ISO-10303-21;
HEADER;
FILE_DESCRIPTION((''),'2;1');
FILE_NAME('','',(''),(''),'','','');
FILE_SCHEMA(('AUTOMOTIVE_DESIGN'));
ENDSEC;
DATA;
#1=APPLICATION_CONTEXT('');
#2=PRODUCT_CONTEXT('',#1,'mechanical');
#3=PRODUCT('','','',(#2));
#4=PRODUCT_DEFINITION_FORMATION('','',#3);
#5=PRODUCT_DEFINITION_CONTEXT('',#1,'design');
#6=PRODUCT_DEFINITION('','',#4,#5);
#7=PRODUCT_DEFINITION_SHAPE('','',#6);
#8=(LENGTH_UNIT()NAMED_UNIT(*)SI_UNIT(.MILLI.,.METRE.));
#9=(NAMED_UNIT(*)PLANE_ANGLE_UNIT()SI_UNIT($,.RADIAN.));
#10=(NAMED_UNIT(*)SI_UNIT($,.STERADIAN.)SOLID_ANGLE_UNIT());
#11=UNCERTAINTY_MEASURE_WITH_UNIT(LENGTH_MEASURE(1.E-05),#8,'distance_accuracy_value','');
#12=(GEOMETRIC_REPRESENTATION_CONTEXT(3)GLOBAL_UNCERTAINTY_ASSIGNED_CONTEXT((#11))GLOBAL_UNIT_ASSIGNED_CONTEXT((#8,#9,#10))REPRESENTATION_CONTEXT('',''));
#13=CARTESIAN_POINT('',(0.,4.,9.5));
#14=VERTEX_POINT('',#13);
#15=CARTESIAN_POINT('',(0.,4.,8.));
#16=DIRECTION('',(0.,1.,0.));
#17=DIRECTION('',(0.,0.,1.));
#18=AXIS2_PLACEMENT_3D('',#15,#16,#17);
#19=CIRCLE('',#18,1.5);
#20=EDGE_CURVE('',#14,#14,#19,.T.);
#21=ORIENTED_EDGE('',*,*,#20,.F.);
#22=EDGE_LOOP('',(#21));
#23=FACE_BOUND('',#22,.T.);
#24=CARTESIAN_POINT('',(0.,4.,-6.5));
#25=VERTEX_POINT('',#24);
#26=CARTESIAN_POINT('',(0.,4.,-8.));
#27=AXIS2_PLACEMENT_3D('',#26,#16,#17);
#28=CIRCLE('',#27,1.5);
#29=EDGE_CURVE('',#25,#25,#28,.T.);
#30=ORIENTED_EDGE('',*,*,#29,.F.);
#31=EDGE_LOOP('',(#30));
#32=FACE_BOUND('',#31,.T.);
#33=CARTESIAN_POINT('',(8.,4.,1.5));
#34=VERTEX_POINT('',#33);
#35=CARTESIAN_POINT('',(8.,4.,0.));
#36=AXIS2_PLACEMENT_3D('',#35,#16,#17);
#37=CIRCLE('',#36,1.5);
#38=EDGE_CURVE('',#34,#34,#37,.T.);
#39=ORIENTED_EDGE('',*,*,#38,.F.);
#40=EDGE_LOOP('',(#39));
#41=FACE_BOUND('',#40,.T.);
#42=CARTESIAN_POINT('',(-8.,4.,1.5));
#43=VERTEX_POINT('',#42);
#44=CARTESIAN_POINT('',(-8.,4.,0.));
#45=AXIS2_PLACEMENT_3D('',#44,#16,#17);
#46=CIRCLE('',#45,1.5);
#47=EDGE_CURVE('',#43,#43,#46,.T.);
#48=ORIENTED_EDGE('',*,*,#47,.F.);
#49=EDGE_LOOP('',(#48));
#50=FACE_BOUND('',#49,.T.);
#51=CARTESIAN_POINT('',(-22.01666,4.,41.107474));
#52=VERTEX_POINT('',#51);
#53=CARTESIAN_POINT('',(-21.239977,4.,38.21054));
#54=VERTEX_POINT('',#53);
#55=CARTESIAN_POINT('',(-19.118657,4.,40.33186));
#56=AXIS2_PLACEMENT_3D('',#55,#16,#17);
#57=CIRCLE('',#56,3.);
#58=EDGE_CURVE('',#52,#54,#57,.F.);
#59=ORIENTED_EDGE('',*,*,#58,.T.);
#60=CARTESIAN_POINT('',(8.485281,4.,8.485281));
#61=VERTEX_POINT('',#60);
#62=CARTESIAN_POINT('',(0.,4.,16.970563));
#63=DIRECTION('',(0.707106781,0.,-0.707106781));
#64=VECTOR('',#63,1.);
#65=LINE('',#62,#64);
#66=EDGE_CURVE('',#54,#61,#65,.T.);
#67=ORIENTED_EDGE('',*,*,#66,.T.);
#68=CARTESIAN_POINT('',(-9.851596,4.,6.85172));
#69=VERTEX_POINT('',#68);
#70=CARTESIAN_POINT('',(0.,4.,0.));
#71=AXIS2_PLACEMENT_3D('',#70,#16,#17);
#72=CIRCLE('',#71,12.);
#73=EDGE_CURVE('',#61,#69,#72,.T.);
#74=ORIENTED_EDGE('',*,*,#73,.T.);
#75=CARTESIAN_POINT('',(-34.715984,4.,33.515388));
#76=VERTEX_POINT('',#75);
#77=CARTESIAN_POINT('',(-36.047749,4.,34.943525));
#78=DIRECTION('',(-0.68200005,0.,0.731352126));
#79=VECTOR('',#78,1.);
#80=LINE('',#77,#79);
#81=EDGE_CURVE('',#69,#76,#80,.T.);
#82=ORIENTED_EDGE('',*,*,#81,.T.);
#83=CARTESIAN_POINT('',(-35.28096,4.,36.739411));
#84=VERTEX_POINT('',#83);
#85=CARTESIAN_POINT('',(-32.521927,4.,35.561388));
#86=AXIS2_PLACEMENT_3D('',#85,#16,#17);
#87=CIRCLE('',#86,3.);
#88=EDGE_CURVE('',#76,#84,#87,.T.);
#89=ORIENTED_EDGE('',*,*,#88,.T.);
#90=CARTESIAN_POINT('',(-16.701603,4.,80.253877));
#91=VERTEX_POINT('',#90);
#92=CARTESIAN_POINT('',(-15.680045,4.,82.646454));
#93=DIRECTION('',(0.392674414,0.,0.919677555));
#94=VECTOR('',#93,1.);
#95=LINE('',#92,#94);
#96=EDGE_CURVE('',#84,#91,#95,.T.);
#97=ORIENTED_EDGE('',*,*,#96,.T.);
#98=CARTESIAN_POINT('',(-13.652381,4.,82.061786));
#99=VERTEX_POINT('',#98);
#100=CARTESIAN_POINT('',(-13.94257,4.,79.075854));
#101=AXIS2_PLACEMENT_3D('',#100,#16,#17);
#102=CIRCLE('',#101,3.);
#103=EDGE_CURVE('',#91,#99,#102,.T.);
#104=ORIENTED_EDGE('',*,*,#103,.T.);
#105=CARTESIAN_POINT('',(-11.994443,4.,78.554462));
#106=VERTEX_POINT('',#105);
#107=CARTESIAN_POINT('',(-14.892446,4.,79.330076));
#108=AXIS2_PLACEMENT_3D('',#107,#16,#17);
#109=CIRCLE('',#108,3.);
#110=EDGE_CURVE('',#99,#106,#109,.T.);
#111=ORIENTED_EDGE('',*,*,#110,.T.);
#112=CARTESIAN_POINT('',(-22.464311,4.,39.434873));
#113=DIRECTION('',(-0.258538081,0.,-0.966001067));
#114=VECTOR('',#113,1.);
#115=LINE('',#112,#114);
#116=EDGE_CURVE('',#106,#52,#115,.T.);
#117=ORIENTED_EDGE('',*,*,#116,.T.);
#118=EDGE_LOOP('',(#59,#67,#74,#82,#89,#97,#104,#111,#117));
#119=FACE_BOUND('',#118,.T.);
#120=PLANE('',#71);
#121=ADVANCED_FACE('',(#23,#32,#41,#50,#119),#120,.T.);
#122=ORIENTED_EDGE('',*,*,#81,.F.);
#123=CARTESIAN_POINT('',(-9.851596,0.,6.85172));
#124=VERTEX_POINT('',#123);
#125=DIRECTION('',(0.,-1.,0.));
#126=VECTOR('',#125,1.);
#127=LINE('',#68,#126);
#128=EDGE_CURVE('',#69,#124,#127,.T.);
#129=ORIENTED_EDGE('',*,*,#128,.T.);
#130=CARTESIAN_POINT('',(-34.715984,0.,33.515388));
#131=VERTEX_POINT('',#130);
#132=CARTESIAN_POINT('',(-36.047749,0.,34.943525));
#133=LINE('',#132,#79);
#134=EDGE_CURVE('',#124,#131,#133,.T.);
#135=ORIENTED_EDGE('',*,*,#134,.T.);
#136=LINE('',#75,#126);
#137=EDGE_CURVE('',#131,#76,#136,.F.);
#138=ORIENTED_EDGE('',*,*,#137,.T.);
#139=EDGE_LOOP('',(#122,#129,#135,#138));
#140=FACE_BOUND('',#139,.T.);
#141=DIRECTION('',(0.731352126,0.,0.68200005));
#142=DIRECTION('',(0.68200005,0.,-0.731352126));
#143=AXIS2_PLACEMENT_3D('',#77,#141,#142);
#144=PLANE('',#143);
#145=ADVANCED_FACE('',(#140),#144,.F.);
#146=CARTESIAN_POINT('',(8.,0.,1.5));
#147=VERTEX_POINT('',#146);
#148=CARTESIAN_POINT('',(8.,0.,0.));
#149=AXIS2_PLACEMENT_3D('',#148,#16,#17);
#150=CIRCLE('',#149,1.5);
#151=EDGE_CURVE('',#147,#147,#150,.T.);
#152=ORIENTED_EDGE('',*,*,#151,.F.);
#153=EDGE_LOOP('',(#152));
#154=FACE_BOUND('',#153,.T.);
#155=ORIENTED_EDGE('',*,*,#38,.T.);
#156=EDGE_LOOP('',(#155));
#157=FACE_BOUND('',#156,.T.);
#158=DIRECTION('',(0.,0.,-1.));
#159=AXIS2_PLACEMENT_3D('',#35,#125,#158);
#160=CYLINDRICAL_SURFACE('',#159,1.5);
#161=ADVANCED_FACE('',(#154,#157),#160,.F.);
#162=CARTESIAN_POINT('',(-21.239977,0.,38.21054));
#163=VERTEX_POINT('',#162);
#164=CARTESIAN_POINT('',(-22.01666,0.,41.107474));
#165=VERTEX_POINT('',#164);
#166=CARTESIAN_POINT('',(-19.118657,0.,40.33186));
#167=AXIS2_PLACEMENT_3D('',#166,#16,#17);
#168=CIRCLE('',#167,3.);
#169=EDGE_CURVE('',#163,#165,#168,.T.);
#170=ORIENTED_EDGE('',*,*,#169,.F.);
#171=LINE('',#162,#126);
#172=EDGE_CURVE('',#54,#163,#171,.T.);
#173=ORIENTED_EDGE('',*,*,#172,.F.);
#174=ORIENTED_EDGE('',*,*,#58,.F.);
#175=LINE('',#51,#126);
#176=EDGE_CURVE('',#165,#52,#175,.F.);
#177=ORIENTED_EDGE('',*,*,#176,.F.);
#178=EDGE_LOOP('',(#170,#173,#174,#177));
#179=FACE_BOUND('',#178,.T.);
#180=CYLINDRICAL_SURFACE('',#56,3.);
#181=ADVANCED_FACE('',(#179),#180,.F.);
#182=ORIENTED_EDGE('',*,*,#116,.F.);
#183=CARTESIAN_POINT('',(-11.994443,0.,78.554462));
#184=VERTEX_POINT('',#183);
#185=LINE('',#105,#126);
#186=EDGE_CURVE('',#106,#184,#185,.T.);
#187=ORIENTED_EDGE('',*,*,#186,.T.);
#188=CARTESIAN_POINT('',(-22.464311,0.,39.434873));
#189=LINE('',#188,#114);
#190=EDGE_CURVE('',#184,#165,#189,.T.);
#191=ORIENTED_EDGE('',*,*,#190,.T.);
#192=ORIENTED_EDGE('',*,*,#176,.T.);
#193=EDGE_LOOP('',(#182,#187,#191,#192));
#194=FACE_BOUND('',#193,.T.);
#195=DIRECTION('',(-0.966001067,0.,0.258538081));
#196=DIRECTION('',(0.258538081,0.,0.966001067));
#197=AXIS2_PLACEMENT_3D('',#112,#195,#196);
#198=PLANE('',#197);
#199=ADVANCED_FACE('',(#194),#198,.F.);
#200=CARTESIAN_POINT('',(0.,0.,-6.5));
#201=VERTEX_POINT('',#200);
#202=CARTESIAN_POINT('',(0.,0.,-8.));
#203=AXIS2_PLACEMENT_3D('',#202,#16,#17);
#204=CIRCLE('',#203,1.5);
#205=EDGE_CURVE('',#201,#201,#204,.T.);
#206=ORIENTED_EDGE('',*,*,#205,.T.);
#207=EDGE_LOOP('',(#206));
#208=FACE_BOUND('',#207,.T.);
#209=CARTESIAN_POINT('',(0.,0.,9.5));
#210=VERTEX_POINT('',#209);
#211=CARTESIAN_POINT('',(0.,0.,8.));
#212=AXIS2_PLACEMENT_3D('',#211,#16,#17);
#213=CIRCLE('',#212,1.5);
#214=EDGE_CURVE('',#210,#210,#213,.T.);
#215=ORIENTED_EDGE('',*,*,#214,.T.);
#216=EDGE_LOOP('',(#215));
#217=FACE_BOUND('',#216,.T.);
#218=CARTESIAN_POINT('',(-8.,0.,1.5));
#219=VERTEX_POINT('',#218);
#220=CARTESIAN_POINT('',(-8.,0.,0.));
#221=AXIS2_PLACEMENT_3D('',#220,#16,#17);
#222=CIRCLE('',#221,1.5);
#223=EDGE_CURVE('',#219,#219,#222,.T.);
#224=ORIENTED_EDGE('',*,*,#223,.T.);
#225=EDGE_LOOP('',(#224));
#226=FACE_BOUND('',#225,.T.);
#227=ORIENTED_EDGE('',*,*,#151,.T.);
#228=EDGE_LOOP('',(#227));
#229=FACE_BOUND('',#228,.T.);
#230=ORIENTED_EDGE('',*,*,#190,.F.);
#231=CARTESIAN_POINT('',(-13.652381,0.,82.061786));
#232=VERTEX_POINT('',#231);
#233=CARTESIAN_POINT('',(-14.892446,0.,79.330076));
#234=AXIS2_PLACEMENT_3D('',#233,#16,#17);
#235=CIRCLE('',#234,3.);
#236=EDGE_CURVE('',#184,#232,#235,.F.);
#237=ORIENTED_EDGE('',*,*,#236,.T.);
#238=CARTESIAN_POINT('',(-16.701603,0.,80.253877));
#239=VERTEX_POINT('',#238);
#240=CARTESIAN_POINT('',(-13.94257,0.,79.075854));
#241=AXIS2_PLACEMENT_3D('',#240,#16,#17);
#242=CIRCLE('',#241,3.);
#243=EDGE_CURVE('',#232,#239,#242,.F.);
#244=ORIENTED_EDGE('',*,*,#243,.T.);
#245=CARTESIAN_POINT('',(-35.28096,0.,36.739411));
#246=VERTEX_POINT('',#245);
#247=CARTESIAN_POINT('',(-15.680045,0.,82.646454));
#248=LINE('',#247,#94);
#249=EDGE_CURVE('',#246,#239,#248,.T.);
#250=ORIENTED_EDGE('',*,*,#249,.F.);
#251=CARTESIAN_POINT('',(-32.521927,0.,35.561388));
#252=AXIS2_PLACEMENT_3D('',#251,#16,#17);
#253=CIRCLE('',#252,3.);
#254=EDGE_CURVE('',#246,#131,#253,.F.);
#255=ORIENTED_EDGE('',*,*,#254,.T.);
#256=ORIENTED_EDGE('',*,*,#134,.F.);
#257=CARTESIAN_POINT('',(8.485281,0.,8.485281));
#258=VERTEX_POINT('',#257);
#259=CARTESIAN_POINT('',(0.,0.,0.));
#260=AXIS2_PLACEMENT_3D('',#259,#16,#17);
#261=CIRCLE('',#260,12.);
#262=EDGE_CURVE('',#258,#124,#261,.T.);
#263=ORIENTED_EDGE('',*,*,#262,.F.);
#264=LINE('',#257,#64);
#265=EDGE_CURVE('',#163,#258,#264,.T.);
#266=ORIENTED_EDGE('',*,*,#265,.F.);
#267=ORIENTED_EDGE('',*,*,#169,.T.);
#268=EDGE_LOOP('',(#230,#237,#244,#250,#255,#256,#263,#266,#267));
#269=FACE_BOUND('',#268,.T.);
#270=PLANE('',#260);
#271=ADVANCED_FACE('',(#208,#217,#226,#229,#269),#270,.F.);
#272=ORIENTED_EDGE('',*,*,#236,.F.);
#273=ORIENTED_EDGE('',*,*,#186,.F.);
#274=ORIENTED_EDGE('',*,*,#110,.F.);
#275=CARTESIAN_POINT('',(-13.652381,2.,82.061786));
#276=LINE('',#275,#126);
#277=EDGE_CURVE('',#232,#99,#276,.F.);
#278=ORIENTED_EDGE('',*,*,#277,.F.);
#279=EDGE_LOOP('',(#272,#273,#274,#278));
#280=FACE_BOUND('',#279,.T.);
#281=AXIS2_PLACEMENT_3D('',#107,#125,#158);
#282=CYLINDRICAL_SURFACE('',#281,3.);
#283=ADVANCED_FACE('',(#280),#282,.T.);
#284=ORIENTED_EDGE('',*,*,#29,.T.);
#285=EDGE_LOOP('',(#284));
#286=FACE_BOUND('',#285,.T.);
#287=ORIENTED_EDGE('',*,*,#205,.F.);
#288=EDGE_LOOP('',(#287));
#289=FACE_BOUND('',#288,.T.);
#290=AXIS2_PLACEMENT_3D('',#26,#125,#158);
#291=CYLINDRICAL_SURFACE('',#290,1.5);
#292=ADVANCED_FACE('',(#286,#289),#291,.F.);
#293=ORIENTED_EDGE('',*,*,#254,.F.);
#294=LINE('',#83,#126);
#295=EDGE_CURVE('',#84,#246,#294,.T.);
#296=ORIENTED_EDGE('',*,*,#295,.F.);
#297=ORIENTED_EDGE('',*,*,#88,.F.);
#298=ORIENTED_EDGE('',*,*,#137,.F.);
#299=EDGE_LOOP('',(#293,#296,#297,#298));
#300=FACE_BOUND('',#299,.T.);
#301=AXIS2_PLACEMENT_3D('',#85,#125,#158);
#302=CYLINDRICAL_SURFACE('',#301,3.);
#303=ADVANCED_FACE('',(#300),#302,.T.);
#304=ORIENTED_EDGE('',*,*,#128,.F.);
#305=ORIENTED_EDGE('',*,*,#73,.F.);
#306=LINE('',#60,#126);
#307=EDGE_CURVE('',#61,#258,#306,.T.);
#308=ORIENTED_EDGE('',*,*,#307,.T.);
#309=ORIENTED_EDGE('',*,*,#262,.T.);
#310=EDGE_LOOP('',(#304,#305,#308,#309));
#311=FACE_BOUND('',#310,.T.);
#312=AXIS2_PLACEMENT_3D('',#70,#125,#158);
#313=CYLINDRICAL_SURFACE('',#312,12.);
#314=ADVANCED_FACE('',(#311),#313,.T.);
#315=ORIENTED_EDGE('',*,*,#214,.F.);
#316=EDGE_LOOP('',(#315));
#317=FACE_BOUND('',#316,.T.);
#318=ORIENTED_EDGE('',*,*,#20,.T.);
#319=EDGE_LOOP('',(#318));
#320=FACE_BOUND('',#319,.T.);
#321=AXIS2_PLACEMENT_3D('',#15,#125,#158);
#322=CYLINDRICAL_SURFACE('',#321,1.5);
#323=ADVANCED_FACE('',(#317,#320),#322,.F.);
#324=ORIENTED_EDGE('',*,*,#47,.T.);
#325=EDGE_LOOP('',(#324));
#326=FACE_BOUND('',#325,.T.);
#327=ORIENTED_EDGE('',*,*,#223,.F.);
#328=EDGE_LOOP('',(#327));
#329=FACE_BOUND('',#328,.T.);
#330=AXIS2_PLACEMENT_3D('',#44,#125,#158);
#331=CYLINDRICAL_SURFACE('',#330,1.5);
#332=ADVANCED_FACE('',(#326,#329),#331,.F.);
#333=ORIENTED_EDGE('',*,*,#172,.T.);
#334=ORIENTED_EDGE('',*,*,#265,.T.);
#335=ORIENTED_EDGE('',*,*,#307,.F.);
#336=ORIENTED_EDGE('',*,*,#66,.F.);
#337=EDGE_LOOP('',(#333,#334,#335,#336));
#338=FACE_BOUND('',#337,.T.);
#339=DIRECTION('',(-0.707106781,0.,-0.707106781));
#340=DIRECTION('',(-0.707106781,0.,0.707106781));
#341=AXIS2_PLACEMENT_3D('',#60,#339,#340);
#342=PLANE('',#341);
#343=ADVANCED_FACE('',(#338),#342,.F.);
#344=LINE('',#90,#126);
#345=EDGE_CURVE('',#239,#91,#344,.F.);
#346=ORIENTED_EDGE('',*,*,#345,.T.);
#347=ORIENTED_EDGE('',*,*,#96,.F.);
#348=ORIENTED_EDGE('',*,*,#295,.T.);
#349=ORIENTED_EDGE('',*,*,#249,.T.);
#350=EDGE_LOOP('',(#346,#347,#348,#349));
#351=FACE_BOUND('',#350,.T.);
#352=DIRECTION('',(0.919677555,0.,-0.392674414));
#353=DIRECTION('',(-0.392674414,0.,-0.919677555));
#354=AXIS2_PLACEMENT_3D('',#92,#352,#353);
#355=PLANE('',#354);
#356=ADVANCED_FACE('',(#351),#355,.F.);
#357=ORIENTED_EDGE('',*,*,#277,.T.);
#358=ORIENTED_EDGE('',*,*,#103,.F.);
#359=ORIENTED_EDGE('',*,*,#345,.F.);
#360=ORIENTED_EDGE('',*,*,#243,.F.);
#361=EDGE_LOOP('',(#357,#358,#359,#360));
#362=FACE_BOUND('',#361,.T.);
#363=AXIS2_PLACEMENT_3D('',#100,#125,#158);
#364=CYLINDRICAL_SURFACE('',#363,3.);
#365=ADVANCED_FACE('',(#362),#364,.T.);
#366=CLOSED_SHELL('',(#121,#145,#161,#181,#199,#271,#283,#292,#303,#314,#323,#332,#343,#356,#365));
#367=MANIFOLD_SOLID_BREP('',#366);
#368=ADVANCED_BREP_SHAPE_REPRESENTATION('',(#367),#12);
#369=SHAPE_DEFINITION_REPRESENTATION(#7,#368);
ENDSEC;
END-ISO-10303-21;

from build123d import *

# Parameters (mm, degrees)
ESQUISSE1_R        = 1.5
BOSS_EXTRU_1_DEPTH = 4
CONG_1_R           = 3


with BuildPart() as part:
    # Esquisse1 → Boss.-Extru.1 (new body)
    with BuildSketch(Plane(origin=(0, 0, 0), x_dir=(1, 0, 0), z_dir=(0, 1, 0))):
        with BuildLine():
            Line((8.485281374, -8.485281374), (0, -16.970562748))
            Line((0, -16.970562748), (-22.464310668, -39.434873416))
            Line((-22.464310668, -39.434873416), (-11.218828677, -81.452465455))
            Line((-11.218828677, -81.452465455), (-15.680045384, -82.646454204))
            Line((-15.680045384, -82.646454204), (-36.047749068, -34.943524646))
            Line((-36.047749068, -34.943524646), (-9.851595733, -6.851719603))
            ThreePointArc((-9.851595733, -6.851719603), (1.064816767, 11.952663521), (8.485281374, -8.485281374))
        make_face()
        with Locations(Location((0, 8, 0), (0, 0, 270))):
            Circle(ESQUISSE1_R, mode=Mode.SUBTRACT)
        with Locations(Location((8, 0, 0), (0, 0, 270))):
            Circle(ESQUISSE1_R, mode=Mode.SUBTRACT)
        with Locations(Location((0, -8, 0), (0, 0, 270))):
            Circle(ESQUISSE1_R, mode=Mode.SUBTRACT)
        with Locations(Location((-8, 0, 0), (0, 0, 270))):
            Circle(ESQUISSE1_R, mode=Mode.SUBTRACT)
    extrude(amount=BOSS_EXTRU_1_DEPTH)

    # Congé1
    # the kernel refuses this fillet: 3 mm, written as the material it adds along each edge
    with BuildSketch(Plane(origin=(-22.464310668, 0, 39.434873416), x_dir=(0.7071067811865301, 0, -0.707106781186565), z_dir=(0, 1, 0))) as cong_1_piece_1:
        with BuildLine():
            CenterArc((CONG_1_R * 0.57715637581, -CONG_1_R), CONG_1_R, 90, 59.983334692)
            Line((-CONG_1_R * 0.288723559099, -CONG_1_R * 0.499748125118), (0, 0))
            Line((0, 0), (CONG_1_R * 0.57715637581, 0))
        make_face()
    extrude(amount=4)
    # the kernel refuses this fillet: 3 mm, written as the material it takes off along each edge
    with BuildSketch(Plane(origin=(-36.047749068, -4.881837421, 34.943524646), x_dir=(0.3926744141534844, 0, 0.9196775546185836), z_dir=(0, 1, 0))) as cong_1_2_piece_1:
        with BuildLine():
            CenterArc((CONG_1_R * 0.650911656199, CONG_1_R), CONG_1_R, 203.878855686, 66.121144314)
            Line((-CONG_1_R * 0.263491749375, CONG_1_R * 0.595195835156), (0, 0))
            Line((0, 0), (CONG_1_R * 0.650911656199, 0))
        make_face()
    extrude(amount=13.763674843, mode=Mode.SUBTRACT)
    with BuildSketch(Plane(origin=(-15.680045384, -6.503846863, 82.646454204), x_dir=(0.9660010666973496, 0, -0.25853808063722905), z_dir=(0, 1, 0))) as cong_1_2_piece_2:
        with BuildLine():
            CenterArc((CONG_1_R * 0.867179581778, CONG_1_R), CONG_1_R, 188.137677252, 81.862322748)
            Line((-CONG_1_R * 0.122751206352, CONG_1_R * 0.858447766839), (0, 0))
            Line((0, 0), (CONG_1_R * 0.867179581778, 0))
        make_face()
    extrude(amount=17.007693727, mode=Mode.SUBTRACT)
    with BuildSketch(Plane(origin=(-11.218828677, -7.5, 81.452465455), x_dir=(-0.2585380806372289, 0, -0.9660010666973499), z_dir=(0, 1, 0))) as cong_1_2_piece_3:
        with BuildLine():
            CenterArc((CONG_1_R, CONG_1_R), CONG_1_R, 180, 90)
            Line((0, CONG_1_R), (0, 0))
            Line((0, 0), (CONG_1_R, 0))
        make_face()
    extrude(amount=19, mode=Mode.SUBTRACT)


solid = part.part
